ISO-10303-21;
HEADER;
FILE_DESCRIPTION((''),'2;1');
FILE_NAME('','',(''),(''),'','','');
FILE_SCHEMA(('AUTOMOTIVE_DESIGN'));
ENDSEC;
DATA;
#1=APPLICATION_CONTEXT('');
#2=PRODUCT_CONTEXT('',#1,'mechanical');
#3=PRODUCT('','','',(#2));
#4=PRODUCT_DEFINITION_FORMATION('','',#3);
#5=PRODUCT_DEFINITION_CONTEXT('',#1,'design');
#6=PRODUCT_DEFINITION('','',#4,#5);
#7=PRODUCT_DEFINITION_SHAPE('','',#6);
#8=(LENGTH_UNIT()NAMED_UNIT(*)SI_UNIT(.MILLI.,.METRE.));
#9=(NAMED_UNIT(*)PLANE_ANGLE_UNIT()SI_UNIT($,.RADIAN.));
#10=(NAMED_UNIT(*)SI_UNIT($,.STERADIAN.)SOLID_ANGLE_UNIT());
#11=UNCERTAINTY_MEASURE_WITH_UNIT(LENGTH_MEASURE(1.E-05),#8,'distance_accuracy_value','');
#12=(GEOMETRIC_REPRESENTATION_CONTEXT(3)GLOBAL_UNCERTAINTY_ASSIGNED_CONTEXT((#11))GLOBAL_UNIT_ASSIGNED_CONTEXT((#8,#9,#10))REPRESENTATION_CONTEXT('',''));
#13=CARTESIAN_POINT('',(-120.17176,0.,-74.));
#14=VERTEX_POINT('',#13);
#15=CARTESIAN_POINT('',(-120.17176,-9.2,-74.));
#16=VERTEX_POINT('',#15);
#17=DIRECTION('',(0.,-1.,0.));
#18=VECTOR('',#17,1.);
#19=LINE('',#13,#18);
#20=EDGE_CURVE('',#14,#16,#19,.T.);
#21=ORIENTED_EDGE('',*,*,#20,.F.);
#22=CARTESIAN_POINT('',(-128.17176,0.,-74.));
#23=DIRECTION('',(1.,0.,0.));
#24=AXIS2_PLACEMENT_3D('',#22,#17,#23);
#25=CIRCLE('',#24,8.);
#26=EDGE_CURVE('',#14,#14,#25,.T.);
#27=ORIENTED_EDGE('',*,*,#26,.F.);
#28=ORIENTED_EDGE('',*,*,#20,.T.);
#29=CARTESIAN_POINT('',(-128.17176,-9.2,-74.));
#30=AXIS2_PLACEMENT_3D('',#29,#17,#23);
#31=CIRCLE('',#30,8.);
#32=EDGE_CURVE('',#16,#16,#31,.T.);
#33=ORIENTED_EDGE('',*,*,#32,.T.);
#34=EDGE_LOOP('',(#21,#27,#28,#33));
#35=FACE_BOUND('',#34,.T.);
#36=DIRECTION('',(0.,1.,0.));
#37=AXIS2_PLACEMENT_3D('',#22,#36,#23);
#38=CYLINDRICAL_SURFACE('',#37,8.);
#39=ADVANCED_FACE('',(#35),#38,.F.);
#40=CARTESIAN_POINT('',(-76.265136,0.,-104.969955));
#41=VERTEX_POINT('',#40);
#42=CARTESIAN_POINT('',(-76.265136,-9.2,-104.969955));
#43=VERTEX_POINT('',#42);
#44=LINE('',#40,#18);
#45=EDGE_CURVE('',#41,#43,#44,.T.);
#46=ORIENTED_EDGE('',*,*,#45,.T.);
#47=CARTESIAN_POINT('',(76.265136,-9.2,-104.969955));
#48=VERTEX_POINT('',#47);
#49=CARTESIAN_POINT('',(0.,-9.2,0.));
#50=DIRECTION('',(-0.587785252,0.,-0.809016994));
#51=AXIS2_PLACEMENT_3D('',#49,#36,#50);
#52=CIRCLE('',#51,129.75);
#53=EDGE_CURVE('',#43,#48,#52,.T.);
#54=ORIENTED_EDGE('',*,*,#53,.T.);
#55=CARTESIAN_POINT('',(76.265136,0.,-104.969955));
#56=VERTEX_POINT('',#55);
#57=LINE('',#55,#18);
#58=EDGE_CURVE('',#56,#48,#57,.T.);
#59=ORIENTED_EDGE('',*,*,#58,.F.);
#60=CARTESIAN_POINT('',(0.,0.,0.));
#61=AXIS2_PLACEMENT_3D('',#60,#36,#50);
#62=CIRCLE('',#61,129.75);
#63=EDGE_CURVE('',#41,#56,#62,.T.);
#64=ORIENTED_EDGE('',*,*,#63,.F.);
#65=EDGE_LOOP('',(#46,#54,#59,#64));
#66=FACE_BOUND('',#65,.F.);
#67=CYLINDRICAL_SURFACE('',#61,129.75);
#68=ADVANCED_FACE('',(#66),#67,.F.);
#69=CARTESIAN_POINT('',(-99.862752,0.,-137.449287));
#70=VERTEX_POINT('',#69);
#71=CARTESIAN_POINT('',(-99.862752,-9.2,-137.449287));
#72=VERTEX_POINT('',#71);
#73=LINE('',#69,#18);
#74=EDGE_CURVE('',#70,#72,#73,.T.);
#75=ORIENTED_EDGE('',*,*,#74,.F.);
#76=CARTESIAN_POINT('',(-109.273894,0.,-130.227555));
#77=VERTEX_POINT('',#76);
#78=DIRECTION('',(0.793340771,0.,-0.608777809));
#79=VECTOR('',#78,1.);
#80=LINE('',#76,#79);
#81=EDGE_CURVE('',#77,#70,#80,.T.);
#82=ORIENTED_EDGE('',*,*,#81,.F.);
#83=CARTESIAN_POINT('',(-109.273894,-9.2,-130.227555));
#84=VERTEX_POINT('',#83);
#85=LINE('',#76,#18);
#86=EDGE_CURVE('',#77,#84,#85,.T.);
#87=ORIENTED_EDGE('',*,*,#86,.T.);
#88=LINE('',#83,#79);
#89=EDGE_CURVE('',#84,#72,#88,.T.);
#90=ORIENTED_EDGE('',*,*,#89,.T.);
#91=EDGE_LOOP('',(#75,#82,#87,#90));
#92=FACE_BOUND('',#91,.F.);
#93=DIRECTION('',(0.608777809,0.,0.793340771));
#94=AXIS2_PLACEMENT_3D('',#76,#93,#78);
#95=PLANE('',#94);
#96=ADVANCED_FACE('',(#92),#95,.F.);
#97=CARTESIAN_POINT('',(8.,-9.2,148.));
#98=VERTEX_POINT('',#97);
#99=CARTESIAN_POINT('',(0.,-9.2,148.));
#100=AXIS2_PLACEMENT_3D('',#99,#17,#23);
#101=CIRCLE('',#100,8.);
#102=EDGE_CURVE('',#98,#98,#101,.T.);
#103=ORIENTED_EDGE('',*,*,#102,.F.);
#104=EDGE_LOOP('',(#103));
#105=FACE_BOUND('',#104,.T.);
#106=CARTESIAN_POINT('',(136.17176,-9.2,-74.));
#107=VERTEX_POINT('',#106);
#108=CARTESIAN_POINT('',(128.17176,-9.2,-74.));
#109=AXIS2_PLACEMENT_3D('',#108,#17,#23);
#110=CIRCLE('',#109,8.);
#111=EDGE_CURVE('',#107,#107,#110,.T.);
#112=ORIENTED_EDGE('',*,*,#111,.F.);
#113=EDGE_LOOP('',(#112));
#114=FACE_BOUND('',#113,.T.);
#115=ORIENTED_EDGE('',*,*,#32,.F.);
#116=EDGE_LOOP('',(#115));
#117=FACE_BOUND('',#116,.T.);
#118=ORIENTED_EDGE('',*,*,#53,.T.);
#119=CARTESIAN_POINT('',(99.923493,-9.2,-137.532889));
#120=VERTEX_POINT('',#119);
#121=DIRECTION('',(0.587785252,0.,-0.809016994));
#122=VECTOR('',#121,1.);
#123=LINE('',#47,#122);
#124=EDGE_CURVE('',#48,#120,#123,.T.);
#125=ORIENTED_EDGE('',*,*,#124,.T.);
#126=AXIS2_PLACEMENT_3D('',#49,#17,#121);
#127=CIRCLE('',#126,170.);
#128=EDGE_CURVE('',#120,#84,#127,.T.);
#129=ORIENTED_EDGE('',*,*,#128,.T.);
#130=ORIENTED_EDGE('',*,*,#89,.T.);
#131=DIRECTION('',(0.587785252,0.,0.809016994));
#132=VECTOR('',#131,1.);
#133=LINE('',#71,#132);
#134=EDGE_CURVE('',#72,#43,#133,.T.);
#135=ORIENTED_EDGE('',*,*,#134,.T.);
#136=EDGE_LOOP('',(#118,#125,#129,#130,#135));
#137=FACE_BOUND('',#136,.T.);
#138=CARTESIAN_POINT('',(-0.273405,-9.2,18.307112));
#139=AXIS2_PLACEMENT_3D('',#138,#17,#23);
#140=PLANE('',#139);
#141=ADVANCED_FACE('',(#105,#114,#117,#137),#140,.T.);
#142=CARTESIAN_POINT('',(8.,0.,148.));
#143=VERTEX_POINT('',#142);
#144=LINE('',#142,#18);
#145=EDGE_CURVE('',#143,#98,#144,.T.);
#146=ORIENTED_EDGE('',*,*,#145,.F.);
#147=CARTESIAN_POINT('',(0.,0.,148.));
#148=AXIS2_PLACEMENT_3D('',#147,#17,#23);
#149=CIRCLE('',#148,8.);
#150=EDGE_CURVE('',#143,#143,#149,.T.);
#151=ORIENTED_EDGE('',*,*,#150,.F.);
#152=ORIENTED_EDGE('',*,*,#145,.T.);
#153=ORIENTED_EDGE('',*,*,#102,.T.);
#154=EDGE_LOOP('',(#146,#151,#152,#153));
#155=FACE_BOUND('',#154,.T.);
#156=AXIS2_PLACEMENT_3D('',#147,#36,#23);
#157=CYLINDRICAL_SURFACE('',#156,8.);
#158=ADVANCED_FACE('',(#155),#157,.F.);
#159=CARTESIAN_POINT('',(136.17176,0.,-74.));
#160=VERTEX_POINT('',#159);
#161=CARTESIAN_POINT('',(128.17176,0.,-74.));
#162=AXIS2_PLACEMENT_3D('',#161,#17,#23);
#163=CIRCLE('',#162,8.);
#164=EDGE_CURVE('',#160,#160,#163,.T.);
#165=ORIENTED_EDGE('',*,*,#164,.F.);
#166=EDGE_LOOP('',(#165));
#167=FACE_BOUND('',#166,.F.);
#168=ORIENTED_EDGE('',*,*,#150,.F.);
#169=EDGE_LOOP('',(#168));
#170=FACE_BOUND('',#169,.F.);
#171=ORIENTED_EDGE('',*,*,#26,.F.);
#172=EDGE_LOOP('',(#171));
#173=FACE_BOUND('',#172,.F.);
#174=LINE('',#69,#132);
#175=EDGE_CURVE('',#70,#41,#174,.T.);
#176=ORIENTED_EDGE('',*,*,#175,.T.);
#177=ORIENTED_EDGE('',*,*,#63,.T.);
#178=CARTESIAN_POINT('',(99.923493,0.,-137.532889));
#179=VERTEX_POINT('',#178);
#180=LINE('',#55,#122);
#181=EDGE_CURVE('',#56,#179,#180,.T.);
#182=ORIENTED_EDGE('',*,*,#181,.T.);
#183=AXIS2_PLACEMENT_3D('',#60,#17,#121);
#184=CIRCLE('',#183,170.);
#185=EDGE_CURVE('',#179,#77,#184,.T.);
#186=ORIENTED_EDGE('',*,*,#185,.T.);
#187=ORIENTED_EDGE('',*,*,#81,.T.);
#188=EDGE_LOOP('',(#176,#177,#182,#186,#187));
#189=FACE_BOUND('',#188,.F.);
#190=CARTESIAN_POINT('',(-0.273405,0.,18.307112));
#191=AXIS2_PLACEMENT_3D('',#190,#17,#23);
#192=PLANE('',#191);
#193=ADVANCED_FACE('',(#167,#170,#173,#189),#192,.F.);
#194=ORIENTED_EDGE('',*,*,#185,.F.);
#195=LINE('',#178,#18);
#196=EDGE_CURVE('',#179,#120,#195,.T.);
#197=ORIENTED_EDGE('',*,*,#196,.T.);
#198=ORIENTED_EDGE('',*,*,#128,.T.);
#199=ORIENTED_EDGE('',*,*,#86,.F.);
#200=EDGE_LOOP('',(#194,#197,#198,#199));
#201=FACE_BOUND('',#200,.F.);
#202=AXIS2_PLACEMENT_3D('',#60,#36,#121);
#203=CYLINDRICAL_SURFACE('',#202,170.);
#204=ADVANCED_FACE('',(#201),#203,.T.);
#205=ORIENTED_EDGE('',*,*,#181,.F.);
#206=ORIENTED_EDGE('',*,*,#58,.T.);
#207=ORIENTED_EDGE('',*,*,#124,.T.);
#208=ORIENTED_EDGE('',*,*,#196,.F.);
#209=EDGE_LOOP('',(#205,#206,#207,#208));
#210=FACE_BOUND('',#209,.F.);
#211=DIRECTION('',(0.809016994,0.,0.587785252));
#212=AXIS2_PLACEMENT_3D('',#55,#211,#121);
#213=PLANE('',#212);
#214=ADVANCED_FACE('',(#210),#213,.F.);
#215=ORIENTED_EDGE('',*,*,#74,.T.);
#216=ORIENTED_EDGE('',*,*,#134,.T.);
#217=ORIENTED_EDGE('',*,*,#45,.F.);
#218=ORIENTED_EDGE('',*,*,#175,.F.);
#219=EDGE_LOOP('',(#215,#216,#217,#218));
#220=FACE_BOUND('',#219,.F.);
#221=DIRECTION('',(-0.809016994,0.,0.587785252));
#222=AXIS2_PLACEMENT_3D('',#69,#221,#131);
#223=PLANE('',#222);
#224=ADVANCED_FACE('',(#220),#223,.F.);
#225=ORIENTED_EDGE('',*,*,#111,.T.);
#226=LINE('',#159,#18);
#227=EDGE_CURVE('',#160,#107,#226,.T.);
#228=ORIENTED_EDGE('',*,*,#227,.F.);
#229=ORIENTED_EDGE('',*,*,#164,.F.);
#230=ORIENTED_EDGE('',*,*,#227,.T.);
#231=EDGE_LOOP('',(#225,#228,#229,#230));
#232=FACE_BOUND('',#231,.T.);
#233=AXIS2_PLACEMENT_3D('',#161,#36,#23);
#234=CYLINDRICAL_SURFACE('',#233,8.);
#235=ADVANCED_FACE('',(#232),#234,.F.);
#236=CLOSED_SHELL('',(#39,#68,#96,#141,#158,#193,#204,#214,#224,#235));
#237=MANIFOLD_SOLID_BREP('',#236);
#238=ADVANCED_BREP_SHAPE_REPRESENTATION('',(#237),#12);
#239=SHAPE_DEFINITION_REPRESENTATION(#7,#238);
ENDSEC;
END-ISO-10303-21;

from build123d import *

# Parameters (mm, degrees)
F0_R     = 8
F1_DEPTH = 9.2


with BuildPart() as f1:
    # F0 (on Front) → F1 (new body)
    with BuildSketch(Plane.XZ):
        with BuildLine():
            Line((76.2651364849, -104.9699550201), (99.9234928897, -137.5328890437))
            ThreePointArc((99.9234928897, -137.5328890437), (5.9329144394, 169.8964405932), (-109.2738936467, -130.2275553302))
            Line((-109.2738936467, -130.2275553302), (-99.8627523041, -137.4492867999))
            Line((-99.8627523041, -137.4492867999), (-76.2651364849, -104.9699550201))
            ThreePointArc((-76.2651364849, -104.9699550201), (-10.7051286377, 129.3076282392), (92.4890377243, -90.9991230773))
            ThreePointArc((92.4890377243, -90.9991230773), (84.6657478828, -98.3197520107), (76.2651364849, -104.9699550201))
        make_face()
        with Locations((-128.1717597601, -74)):
            Circle(F0_R, mode=Mode.SUBTRACT)
        with Locations((128.1717597601, -74)):
            Circle(F0_R, mode=Mode.SUBTRACT)
        with Locations((0, 148)):
            Circle(F0_R, mode=Mode.SUBTRACT)
    extrude(amount=F1_DEPTH)


solid = f1.part
